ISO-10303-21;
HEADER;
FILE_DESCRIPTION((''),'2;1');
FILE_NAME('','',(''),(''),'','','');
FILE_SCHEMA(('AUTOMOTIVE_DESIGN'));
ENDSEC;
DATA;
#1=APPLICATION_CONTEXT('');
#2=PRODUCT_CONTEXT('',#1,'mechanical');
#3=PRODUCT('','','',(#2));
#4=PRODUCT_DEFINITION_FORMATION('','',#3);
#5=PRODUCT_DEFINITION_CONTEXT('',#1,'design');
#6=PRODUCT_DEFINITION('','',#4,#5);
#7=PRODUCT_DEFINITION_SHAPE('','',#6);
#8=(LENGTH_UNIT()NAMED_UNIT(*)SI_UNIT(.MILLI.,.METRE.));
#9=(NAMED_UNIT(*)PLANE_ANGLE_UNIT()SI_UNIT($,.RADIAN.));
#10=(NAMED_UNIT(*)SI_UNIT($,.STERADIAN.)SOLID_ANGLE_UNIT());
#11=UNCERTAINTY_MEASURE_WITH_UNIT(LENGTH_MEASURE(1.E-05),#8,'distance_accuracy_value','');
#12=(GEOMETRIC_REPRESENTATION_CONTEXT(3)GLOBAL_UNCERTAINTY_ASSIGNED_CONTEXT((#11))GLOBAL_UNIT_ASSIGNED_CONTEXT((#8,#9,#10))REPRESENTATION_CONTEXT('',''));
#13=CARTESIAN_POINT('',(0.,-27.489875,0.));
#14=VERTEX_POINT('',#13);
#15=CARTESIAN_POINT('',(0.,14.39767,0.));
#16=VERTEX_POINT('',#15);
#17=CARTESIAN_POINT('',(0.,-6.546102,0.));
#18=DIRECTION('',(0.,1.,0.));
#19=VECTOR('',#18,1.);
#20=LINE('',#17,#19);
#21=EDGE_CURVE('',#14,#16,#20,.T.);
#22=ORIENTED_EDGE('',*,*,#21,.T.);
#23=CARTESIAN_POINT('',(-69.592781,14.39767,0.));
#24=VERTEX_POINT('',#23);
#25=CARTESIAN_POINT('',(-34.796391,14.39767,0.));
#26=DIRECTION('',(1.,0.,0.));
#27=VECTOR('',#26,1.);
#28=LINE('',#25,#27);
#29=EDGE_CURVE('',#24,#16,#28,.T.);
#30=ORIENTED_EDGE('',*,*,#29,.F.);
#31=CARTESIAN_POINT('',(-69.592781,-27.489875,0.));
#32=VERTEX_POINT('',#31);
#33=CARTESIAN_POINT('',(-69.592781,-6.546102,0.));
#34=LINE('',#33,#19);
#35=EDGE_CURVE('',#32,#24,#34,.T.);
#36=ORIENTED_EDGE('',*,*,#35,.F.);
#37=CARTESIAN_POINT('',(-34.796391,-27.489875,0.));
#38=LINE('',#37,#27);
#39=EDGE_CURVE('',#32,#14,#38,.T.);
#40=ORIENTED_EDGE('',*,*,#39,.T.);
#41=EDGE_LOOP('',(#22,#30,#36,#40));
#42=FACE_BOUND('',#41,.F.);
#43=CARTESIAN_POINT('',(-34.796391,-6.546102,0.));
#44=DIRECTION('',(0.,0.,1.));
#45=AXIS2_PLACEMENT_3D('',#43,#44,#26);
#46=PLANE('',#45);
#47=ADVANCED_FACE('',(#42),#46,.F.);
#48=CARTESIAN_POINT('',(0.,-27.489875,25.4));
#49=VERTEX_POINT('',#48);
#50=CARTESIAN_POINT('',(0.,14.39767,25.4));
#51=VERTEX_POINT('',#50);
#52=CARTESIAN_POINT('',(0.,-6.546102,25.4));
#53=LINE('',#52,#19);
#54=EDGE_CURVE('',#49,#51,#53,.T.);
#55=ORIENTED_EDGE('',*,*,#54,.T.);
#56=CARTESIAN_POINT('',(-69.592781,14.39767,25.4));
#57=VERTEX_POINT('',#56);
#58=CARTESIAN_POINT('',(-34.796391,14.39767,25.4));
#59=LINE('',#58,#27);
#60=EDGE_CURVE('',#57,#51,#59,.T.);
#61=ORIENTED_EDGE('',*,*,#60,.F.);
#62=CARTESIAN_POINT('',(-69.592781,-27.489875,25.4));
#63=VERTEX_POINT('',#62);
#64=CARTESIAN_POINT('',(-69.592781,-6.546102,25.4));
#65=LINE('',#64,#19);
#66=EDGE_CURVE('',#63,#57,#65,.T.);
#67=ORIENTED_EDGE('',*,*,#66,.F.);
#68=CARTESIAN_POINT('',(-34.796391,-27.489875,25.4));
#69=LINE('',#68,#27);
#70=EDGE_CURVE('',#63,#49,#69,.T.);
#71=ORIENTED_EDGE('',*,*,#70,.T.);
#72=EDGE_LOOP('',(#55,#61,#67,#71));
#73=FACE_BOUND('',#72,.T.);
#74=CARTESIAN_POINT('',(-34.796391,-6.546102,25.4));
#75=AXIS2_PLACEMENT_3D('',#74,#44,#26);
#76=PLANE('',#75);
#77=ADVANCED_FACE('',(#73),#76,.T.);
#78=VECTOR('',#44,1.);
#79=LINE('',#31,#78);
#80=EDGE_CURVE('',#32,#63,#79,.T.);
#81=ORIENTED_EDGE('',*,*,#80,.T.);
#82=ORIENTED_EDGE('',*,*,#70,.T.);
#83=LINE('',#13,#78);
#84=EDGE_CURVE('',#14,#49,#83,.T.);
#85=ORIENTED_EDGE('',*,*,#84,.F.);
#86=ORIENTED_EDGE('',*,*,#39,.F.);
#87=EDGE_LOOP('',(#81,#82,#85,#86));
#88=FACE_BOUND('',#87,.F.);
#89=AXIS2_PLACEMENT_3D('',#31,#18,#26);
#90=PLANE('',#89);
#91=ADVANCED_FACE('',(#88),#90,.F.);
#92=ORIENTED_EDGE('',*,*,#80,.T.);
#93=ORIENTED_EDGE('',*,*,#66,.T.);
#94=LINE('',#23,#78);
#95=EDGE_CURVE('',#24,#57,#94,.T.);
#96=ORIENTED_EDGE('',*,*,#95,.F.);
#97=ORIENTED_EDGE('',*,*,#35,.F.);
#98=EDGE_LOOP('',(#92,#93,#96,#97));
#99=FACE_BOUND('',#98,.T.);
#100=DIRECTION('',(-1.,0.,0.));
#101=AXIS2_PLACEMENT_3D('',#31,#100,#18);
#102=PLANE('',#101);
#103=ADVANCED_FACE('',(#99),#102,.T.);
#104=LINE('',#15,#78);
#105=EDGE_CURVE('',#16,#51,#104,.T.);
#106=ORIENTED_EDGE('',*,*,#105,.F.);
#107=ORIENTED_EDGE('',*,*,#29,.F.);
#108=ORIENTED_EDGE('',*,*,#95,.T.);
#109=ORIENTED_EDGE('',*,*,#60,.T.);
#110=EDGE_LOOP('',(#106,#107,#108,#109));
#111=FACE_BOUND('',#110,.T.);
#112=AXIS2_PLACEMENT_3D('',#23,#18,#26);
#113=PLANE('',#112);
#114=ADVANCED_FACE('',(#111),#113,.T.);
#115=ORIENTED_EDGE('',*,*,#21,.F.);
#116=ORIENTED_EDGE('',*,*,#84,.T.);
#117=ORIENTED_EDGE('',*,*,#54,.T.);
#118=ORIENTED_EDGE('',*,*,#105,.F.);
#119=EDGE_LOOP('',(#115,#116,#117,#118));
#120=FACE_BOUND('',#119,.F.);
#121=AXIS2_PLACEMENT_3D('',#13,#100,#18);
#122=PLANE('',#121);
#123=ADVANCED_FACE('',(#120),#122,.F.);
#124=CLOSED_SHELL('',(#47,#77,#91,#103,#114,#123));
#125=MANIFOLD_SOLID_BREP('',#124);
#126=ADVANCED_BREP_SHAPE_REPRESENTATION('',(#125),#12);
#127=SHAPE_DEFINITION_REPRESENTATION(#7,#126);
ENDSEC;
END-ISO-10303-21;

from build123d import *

# Parameters (mm, degrees)
F0_W     = 69.5927813649
F0_H     = 41.8875440955
F1_DEPTH = 25.4


# Not quite as in the source:
# - a feature of the source that left no trace in its solid (it failed there, or was rolled back) is left out


with BuildPart() as f1:
    # F0 (on Top) → F1 (new body)
    with BuildSketch(Plane.XY):
        with Locations((-34.7963906825, -6.5461024642)):
            Rectangle(F0_W, F0_H)
    extrude(amount=F1_DEPTH)


solid = f1.part
